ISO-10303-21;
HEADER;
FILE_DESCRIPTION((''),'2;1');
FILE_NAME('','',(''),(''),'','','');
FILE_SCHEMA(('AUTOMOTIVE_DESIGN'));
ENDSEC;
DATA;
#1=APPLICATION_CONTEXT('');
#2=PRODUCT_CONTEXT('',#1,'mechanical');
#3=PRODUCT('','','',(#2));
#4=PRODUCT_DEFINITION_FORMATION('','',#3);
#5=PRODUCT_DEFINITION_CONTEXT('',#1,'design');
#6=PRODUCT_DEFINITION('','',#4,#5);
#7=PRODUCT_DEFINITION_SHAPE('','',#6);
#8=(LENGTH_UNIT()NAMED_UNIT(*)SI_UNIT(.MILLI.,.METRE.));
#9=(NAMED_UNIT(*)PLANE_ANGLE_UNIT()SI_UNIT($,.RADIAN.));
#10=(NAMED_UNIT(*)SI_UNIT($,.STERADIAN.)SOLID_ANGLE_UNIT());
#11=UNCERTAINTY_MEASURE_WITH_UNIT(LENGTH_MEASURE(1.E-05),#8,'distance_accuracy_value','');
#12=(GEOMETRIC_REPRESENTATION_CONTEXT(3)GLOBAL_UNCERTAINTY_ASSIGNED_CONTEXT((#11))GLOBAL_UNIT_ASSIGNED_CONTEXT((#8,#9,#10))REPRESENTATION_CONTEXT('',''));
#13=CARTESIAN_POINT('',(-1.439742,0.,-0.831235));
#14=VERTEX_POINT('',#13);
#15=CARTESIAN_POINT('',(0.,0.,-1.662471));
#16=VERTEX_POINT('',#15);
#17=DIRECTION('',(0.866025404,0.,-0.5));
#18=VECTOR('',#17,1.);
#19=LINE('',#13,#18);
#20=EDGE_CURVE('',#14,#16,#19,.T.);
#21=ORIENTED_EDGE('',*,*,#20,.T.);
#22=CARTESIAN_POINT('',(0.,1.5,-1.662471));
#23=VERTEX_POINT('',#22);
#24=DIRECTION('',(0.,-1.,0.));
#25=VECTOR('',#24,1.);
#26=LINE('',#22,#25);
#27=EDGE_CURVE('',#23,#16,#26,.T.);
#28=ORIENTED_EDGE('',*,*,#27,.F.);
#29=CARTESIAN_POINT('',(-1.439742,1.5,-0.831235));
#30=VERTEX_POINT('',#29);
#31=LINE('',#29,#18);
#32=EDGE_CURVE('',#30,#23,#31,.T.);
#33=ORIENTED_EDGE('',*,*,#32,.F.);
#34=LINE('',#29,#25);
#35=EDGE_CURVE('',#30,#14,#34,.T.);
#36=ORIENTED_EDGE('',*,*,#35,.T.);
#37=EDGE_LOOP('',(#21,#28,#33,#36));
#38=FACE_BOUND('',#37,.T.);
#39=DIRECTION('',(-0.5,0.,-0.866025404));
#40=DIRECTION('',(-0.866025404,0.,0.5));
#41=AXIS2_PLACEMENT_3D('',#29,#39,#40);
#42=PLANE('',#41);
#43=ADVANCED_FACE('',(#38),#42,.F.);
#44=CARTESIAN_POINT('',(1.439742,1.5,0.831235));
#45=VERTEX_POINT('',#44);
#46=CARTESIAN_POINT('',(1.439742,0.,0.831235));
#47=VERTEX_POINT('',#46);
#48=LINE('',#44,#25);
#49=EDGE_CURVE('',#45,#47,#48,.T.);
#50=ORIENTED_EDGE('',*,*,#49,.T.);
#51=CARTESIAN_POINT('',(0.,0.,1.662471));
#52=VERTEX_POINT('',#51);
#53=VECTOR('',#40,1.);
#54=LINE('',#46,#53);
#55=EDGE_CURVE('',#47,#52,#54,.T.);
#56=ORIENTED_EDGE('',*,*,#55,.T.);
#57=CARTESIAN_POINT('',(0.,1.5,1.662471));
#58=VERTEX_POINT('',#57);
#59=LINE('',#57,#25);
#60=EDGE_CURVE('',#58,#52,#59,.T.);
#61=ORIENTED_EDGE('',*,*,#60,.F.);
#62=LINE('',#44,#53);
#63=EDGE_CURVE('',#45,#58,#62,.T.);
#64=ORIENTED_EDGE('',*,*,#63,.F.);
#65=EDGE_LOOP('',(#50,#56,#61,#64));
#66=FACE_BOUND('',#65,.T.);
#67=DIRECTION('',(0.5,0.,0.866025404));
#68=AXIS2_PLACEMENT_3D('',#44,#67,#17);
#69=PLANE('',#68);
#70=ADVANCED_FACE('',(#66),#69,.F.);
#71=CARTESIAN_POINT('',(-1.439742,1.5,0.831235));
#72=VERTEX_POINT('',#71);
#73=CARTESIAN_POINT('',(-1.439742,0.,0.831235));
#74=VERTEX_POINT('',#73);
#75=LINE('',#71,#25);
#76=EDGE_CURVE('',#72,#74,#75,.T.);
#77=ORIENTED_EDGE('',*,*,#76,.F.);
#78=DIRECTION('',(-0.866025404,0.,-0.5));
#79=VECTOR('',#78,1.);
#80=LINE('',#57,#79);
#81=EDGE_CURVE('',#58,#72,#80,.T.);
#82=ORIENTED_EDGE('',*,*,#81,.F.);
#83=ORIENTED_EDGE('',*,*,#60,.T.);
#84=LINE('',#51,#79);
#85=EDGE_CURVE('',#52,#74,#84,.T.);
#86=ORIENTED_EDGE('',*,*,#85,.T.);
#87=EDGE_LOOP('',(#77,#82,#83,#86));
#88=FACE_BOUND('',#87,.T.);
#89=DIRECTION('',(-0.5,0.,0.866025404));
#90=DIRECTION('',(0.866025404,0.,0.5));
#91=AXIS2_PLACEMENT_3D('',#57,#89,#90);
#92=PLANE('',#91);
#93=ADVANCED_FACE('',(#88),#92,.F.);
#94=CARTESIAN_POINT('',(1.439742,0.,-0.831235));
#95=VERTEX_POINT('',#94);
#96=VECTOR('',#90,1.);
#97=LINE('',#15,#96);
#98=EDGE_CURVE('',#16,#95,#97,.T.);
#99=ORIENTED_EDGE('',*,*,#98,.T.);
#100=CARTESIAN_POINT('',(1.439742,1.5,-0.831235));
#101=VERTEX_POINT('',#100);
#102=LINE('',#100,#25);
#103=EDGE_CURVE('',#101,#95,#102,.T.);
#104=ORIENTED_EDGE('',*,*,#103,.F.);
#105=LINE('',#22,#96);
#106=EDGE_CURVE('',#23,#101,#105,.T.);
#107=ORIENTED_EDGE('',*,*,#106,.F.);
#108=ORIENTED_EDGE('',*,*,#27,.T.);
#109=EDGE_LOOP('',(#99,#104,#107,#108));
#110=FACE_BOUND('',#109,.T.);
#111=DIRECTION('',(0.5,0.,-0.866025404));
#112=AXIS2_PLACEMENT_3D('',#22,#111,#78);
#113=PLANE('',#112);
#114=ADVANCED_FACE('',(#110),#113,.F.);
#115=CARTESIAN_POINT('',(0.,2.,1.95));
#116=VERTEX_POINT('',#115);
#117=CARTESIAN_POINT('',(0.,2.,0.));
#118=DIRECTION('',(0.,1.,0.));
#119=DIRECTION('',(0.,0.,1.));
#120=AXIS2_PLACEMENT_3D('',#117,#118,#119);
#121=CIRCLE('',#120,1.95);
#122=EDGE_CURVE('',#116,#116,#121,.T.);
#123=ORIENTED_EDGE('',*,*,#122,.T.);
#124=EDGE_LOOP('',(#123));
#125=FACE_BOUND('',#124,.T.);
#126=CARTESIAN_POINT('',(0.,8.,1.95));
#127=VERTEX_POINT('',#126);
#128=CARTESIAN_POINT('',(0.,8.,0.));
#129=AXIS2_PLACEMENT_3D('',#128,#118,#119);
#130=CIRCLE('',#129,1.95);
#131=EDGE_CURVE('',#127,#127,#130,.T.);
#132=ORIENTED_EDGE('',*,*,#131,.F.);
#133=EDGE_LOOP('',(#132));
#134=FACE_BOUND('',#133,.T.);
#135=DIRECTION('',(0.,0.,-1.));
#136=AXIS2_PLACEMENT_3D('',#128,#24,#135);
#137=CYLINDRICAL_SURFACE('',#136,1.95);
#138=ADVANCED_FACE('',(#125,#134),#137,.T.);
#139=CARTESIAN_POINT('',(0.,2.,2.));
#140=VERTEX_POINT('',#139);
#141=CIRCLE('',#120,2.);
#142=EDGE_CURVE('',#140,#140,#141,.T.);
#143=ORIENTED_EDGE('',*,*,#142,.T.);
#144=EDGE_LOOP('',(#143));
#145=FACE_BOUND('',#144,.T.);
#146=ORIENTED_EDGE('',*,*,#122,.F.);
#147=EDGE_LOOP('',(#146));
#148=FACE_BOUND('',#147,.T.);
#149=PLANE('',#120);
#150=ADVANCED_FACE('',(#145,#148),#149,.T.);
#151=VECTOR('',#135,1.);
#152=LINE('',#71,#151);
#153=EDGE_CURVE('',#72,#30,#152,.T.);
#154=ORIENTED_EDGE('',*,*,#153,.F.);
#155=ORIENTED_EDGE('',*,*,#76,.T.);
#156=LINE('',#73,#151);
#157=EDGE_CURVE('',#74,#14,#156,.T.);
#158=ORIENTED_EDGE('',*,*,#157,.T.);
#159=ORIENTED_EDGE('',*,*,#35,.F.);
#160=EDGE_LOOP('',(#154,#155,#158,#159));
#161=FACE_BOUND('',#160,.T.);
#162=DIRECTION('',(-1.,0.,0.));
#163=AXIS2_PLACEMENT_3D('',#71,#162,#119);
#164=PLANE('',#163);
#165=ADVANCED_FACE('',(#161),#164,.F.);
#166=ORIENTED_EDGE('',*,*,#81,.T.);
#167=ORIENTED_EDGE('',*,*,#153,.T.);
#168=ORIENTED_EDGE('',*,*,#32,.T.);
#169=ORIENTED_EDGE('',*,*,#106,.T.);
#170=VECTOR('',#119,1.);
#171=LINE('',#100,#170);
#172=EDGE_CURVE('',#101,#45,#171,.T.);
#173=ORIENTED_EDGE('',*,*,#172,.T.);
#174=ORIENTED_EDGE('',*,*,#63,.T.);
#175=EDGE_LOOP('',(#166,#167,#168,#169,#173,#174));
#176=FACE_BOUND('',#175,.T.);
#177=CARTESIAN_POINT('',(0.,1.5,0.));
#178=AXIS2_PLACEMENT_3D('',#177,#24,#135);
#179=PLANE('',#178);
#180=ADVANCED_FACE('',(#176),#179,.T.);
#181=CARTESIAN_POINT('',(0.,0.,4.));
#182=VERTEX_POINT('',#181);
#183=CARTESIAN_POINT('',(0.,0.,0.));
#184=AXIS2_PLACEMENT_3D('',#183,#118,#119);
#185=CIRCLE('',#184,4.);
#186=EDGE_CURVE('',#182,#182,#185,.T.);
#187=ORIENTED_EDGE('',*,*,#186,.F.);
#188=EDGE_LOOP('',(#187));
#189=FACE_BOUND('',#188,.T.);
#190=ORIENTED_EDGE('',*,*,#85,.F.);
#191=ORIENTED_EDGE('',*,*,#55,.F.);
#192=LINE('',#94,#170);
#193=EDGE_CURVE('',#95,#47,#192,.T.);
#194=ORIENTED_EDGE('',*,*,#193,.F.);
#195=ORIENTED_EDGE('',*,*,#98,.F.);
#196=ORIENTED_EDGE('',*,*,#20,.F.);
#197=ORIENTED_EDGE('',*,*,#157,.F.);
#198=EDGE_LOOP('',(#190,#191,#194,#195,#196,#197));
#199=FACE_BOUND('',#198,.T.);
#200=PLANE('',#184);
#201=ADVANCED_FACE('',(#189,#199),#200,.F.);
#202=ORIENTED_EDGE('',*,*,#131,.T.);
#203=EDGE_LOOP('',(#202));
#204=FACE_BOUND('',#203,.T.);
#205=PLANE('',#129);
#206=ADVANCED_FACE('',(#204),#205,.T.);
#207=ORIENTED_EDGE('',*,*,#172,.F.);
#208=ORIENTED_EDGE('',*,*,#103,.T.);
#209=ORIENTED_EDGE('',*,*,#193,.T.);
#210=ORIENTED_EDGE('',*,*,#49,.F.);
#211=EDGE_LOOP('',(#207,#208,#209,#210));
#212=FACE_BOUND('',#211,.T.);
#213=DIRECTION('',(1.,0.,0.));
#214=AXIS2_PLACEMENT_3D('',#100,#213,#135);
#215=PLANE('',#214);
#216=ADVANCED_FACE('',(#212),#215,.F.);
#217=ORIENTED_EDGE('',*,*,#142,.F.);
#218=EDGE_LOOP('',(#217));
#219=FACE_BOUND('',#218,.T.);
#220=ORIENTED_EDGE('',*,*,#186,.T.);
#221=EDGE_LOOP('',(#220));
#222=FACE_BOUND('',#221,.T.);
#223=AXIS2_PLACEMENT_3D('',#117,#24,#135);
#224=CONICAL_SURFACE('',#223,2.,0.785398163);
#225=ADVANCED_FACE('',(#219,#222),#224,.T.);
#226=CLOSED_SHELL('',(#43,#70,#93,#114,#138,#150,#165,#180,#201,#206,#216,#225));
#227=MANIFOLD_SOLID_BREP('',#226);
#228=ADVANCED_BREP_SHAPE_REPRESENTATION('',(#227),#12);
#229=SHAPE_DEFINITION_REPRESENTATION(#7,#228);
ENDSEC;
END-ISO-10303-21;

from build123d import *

# Parameters (mm, degrees)
SKETCH1_R           = 4
BOSS_EXTRUDE1_DEPTH = 2
SKETCH2_R           = 1.95
BOSS_EXTRUDE2_DEPTH = 6
CHAMFER1_SIZE       = 2
CUT_EXTRUDE1_DEPTH  = 1.5


with BuildPart() as part:
    # Sketch1 → Boss-Extrude1 (new body)
    with BuildSketch(Plane(origin=(0, 0, 0), x_dir=(1, 0, 0), z_dir=(0, 1, 0))):
        with Locations(Location((0, 0, 0), (0, 0, 270))):
            Circle(SKETCH1_R)
    extrude(amount=BOSS_EXTRUDE1_DEPTH)

    # Sketch2 → Boss-Extrude2 (add)
    with BuildSketch(Plane(origin=(0, 2, 0), x_dir=(1, 0, 0), z_dir=(0, 1, 0))):
        with Locations(Location((0, 0, 0), (0, 0, 270))):
            Circle(SKETCH2_R)
    extrude(amount=BOSS_EXTRUDE2_DEPTH)

    # Chamfer1
    chamfer1_edges = [part.edges().sort_by_distance(p)[0] for p in [
        (0, 2, -4),
    ]]
    chamfer(chamfer1_edges, length=CHAMFER1_SIZE - 0.0001)  # a hair under: the kernel refuses the full size

    # Sketch3 → Cut-Extrude1 (cut)
    with BuildSketch(Plane.XZ):
        Polygon((0, -1.662470902), (1.439742034, -0.831235451), (1.439742034, 0.831235451), (0, 1.662470902), (-1.439742034, 0.831235451), (-1.439742034, -0.831235451), align=None)
    extrude(amount=-CUT_EXTRUDE1_DEPTH, mode=Mode.SUBTRACT)


solid = part.part
